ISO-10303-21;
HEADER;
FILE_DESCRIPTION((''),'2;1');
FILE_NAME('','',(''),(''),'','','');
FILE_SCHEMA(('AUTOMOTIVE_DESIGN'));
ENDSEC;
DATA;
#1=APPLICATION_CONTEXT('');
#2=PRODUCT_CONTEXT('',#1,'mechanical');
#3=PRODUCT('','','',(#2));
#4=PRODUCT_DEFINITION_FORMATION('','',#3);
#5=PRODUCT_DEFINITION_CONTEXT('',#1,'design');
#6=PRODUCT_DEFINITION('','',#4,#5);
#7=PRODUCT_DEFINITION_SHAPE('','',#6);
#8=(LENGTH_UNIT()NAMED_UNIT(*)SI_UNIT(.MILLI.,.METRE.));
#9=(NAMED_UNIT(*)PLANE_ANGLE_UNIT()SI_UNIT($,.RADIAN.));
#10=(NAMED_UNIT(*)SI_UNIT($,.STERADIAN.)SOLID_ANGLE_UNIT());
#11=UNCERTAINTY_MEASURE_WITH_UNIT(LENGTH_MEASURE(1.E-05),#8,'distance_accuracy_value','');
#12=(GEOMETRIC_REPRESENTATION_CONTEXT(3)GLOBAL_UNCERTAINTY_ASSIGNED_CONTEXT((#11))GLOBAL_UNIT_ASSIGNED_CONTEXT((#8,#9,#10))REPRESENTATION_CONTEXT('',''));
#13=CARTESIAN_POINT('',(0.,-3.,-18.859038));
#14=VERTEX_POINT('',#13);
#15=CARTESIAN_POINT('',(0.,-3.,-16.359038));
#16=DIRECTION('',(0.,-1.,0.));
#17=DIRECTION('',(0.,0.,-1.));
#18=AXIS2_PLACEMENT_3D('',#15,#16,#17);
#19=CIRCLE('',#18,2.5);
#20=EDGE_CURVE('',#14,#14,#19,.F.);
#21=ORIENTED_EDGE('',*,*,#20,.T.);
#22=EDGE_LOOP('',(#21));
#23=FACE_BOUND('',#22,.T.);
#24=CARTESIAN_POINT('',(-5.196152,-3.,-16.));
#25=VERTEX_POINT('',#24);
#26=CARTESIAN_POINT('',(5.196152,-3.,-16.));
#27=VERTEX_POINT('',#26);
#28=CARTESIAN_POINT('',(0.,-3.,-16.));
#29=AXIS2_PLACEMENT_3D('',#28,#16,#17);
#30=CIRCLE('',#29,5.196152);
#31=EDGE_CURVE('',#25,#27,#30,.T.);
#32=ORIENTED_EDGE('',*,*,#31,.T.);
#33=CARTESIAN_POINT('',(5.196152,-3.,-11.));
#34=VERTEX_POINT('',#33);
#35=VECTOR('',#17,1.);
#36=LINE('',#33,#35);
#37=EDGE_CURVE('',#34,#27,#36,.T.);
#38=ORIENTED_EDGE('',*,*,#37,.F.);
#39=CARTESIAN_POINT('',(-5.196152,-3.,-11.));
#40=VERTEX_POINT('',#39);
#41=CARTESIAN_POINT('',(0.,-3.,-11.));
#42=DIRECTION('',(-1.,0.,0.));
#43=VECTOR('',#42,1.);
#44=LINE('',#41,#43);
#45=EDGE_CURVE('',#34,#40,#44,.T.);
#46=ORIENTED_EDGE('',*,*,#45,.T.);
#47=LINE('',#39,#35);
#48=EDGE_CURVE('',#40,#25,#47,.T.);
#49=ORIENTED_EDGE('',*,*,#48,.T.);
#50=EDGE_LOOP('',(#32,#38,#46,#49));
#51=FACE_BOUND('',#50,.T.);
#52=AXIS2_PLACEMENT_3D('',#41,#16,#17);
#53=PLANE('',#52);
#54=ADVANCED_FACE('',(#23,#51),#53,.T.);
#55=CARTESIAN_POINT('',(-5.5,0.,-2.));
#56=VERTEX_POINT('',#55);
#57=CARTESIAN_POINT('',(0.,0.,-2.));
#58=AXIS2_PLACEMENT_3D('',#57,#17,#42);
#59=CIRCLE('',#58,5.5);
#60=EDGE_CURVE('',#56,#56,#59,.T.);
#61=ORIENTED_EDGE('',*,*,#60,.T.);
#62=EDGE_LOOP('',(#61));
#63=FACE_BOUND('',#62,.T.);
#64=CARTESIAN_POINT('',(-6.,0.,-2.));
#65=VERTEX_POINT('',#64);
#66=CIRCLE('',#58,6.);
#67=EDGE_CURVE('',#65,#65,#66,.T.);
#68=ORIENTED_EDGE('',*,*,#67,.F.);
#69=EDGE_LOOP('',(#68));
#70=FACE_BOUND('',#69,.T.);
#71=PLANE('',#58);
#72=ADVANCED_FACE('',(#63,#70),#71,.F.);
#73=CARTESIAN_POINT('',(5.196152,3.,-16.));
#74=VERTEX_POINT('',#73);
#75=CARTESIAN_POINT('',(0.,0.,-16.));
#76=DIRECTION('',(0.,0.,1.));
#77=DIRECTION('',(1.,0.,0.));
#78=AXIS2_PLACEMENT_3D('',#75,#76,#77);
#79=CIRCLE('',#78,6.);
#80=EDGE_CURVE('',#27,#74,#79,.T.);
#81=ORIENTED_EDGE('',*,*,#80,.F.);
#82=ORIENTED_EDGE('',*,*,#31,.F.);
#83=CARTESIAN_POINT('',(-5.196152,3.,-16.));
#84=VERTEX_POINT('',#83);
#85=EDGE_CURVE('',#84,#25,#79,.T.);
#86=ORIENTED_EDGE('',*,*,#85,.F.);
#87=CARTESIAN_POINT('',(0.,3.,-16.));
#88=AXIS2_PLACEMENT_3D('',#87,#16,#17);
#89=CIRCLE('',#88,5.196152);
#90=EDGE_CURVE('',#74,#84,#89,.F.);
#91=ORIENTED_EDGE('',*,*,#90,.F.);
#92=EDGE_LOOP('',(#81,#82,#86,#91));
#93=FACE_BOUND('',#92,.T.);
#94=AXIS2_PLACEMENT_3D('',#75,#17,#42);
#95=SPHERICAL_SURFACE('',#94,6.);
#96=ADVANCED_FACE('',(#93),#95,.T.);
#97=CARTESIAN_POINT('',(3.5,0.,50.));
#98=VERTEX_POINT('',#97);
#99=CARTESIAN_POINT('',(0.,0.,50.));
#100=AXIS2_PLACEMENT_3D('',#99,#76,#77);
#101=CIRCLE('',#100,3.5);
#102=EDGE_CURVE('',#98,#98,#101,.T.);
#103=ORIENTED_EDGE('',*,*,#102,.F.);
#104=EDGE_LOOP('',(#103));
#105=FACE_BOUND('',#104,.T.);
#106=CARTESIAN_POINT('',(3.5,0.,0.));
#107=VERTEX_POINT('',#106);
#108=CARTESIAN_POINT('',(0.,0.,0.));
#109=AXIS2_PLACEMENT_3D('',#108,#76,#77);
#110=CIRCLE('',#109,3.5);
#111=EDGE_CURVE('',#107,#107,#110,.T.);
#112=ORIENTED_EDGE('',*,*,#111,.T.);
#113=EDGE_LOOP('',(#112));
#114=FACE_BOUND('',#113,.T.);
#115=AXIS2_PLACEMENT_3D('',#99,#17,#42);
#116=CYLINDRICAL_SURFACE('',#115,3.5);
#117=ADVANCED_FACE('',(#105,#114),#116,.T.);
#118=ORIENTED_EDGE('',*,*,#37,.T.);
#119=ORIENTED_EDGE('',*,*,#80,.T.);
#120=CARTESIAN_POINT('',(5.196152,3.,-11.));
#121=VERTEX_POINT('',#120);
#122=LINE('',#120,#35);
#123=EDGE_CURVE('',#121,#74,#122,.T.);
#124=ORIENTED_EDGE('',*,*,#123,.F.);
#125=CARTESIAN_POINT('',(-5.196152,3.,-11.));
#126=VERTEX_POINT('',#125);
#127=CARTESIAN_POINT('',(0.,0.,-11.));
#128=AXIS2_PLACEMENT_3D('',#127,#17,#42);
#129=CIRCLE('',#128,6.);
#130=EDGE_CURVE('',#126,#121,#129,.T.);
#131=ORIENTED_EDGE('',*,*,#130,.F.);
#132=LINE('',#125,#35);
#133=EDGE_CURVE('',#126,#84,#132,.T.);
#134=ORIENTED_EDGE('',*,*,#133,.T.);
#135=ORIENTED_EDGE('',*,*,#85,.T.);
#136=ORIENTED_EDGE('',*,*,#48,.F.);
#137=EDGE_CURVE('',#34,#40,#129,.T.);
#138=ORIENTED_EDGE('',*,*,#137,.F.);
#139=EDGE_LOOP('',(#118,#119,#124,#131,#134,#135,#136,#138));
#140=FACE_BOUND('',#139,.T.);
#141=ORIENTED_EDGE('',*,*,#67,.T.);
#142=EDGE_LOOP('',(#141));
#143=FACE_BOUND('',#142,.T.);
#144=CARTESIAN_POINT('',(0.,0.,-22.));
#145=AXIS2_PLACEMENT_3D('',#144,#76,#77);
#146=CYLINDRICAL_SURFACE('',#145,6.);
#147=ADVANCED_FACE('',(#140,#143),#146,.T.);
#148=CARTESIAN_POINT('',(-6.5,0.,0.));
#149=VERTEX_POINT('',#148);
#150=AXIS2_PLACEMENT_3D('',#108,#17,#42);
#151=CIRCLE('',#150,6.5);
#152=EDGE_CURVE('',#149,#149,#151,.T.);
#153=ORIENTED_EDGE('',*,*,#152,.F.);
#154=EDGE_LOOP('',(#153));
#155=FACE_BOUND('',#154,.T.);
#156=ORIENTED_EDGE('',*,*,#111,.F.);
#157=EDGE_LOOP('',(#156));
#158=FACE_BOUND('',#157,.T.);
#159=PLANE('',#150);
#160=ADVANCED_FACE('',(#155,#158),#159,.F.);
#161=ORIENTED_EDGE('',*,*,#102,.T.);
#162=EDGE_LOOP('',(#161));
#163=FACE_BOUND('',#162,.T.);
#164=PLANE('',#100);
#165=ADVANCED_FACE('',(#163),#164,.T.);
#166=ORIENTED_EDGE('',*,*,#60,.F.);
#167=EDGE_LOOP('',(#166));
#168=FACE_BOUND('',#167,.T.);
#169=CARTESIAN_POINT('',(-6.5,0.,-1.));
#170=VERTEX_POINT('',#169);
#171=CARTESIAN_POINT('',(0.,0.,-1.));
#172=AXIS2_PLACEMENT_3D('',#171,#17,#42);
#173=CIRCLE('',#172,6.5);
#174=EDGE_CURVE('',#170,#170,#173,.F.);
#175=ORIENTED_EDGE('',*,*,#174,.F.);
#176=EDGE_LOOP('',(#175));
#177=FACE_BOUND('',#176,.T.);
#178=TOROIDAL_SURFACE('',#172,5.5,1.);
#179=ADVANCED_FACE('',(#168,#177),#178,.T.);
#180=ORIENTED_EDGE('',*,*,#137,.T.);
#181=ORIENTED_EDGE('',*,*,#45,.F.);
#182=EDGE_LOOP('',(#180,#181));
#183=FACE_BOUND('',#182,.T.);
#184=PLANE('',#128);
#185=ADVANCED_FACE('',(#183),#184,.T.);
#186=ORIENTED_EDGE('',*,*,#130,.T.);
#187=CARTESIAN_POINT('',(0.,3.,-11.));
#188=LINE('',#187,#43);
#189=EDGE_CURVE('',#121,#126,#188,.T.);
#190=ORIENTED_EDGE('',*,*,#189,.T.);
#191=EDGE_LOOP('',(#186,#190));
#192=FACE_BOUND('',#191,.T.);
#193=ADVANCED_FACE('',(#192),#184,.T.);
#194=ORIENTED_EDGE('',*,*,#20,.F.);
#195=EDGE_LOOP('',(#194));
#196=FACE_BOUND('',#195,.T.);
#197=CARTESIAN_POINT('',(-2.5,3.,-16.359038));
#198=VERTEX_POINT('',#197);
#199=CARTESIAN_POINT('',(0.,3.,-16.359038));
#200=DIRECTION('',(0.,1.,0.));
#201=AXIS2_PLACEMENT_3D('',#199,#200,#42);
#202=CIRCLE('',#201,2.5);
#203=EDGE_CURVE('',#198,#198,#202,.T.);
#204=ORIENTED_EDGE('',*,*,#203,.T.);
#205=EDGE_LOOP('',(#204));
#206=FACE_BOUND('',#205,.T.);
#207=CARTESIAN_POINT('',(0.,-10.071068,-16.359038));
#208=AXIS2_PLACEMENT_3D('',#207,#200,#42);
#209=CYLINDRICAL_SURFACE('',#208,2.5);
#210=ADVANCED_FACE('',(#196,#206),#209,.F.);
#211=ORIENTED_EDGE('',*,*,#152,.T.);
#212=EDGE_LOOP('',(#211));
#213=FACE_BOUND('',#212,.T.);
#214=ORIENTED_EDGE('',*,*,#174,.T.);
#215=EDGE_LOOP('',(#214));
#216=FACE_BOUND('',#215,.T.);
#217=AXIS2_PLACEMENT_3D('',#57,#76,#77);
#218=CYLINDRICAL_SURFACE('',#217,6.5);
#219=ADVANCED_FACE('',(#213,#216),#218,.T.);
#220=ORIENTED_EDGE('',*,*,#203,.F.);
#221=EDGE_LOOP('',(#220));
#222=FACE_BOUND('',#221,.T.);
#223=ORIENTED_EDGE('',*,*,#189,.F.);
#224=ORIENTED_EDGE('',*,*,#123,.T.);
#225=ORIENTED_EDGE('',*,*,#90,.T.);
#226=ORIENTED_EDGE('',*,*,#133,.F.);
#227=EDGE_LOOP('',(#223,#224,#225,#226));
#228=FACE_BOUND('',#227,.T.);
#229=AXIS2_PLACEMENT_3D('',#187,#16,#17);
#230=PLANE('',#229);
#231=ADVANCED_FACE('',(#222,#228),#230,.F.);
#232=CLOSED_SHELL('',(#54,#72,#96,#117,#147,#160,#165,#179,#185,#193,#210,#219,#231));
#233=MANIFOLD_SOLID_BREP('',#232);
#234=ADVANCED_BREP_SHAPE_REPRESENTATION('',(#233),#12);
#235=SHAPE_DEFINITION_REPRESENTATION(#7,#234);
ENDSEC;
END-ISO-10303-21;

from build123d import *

# Parameters (mm, degrees)
ESQUISSE1_R             = 3.5
BOSS_EXTRU_1_DEPTH      = 50
ESQUISSE2_R             = 6.5
BOSS_EXTRU_2_DEPTH      = 2
CONG_1_R                = 1
ESQUISSE3_R             = 6
BOSS_EXTRU_3_DEPTH      = 20
ENL_V_START             = -11
ENL_V_MAT_EXTRU_1_DEPTH = 11
CONG_3_R                = 6
ESQUISSE5_R             = 2.5
ENL_V_MAT_EXTRU_2_DEPTH = 6


with BuildPart() as part:
    # Esquisse1 → Boss.-Extru.1 (new body)
    with BuildSketch(Plane.XY):
        Circle(ESQUISSE1_R)
    extrude(amount=BOSS_EXTRU_1_DEPTH)

    # Esquisse2 → Boss.-Extru.2 (add)
    with BuildSketch(Plane(origin=(0, 0, 0), x_dir=(-1, 0, 0), z_dir=(0, 0, -1))):
        Circle(ESQUISSE2_R)
    extrude(amount=BOSS_EXTRU_2_DEPTH)

    # Congé1
    cong_1_edges = [part.edges().sort_by_distance(p)[0] for p in [
        (6.5, 0, -2),
    ]]
    fillet(cong_1_edges, radius=CONG_1_R)

    # Esquisse3 → Boss.-Extru.3 (add)
    with BuildSketch(Plane(origin=(0, 0, -2), x_dir=(-1, 0, 0), z_dir=(0, 0, -1))):
        Circle(ESQUISSE3_R)
    extrude(amount=BOSS_EXTRU_3_DEPTH)

    # Esquisse4 → Enlèv. mat.-Extru.1 (cut)
    with BuildSketch(Plane(origin=(0, 0, -22), x_dir=(-1, 0, 0), z_dir=(0, 0, -1)).offset(ENL_V_START)):
        with BuildLine():
            Line((5.196152423, -3), (-5.196152423, -3))
            ThreePointArc((-5.196152423, -3), (0, -6), (5.196152423, -3))
        make_face()
        with BuildLine():
            ThreePointArc((5.196152423, 3), (0, 6), (-5.196152423, 3))
            Line((-5.196152423, 3), (5.196152423, 3))
        make_face()
    extrude(amount=ENL_V_MAT_EXTRU_1_DEPTH, mode=Mode.SUBTRACT)

    # Congé3
    # the kernel refuses this fillet: 6 mm, written as the material it takes off along each edge
    with BuildSketch(Plane(origin=(0, 0, -22), x_dir=(-0.9930943434085017, 0.11731847718938858, 0), z_dir=(-0.11731847718938858, -0.9930943434085017, 0))) as cong_3_piece_1:
        with BuildLine():
            CenterArc((0.0001, -5.9999), CONG_3_R, 0, 90)
            Line((0.0001, 0.0001), (0.0001, 0.1201))
            ThreePointArc((0.0001, 0.1201), (3.00005, 0.12), (6, 0.12))
            Line((6, 0.12), (6.12, 0))
            ThreePointArc((6.12, 0), (6.12, -2.99995), (6.1201, -5.9999))
            Line((6.1201, -5.9999), (6.0001, -5.9999))
        make_face()
    revolve(axis=Axis((0, 0, -22), (0, 0, -1)), revolution_arc=346.525261187, mode=Mode.SUBTRACT)
    with BuildSketch(Plane(origin=(0, 0, -22), x_dir=(-1, 0, 0), z_dir=(0, -1, 0))) as cong_3_piece_2:
        with BuildLine():
            CenterArc((0.0001, -5.9999), CONG_3_R, 0, 90)
            Line((0.0001, 0.0001), (0.0001, 0.1201))
            ThreePointArc((0.0001, 0.1201), (3.00005, 0.12), (6, 0.12))
            Line((6, 0.12), (6.12, 0))
            ThreePointArc((6.12, 0), (6.12, -2.99995), (6.1201, -5.9999))
            Line((6.1201, -5.9999), (6.0001, -5.9999))
        make_face()
    revolve(axis=Axis((0, 0, -22), (0, 0, -1)), revolution_arc=173.243453158, mode=Mode.SUBTRACT)
    with BuildSketch(Plane(origin=(0, 0, -22), x_dir=(0.9930550201853389, -0.11765086861003726, 0), z_dir=(0.11765086861003726, 0.9930550201853389, 0))) as cong_3_piece_3:
        with BuildLine():
            CenterArc((0.0001, -5.9999), CONG_3_R, 0, 90)
            Line((0.0001, 0.0001), (0.0001, 0.1201))
            ThreePointArc((0.0001, 0.1201), (3.00005, 0.12), (6, 0.12))
            Line((6, 0.12), (6.12, 0))
            ThreePointArc((6.12, 0), (6.12, -2.99995), (6.1201, -5.9999))
            Line((6.1201, -5.9999), (6.0001, -5.9999))
        make_face()
    revolve(axis=Axis((0, 0, -22), (0, 0, -1)), revolution_arc=173.243453158, mode=Mode.SUBTRACT)

    # Esquisse5 → Enlèv. mat.-Extru.2 (cut)
    with BuildSketch(Plane(origin=(0, 3, 0), x_dir=(1, 0, 0), z_dir=(0, 1, 0))):
        with Locations(Location((0, 16.359037674, 0), (0, 0, 180))):
            Circle(ESQUISSE5_R)
    extrude(amount=-ENL_V_MAT_EXTRU_2_DEPTH, mode=Mode.SUBTRACT)


solid = part.part
